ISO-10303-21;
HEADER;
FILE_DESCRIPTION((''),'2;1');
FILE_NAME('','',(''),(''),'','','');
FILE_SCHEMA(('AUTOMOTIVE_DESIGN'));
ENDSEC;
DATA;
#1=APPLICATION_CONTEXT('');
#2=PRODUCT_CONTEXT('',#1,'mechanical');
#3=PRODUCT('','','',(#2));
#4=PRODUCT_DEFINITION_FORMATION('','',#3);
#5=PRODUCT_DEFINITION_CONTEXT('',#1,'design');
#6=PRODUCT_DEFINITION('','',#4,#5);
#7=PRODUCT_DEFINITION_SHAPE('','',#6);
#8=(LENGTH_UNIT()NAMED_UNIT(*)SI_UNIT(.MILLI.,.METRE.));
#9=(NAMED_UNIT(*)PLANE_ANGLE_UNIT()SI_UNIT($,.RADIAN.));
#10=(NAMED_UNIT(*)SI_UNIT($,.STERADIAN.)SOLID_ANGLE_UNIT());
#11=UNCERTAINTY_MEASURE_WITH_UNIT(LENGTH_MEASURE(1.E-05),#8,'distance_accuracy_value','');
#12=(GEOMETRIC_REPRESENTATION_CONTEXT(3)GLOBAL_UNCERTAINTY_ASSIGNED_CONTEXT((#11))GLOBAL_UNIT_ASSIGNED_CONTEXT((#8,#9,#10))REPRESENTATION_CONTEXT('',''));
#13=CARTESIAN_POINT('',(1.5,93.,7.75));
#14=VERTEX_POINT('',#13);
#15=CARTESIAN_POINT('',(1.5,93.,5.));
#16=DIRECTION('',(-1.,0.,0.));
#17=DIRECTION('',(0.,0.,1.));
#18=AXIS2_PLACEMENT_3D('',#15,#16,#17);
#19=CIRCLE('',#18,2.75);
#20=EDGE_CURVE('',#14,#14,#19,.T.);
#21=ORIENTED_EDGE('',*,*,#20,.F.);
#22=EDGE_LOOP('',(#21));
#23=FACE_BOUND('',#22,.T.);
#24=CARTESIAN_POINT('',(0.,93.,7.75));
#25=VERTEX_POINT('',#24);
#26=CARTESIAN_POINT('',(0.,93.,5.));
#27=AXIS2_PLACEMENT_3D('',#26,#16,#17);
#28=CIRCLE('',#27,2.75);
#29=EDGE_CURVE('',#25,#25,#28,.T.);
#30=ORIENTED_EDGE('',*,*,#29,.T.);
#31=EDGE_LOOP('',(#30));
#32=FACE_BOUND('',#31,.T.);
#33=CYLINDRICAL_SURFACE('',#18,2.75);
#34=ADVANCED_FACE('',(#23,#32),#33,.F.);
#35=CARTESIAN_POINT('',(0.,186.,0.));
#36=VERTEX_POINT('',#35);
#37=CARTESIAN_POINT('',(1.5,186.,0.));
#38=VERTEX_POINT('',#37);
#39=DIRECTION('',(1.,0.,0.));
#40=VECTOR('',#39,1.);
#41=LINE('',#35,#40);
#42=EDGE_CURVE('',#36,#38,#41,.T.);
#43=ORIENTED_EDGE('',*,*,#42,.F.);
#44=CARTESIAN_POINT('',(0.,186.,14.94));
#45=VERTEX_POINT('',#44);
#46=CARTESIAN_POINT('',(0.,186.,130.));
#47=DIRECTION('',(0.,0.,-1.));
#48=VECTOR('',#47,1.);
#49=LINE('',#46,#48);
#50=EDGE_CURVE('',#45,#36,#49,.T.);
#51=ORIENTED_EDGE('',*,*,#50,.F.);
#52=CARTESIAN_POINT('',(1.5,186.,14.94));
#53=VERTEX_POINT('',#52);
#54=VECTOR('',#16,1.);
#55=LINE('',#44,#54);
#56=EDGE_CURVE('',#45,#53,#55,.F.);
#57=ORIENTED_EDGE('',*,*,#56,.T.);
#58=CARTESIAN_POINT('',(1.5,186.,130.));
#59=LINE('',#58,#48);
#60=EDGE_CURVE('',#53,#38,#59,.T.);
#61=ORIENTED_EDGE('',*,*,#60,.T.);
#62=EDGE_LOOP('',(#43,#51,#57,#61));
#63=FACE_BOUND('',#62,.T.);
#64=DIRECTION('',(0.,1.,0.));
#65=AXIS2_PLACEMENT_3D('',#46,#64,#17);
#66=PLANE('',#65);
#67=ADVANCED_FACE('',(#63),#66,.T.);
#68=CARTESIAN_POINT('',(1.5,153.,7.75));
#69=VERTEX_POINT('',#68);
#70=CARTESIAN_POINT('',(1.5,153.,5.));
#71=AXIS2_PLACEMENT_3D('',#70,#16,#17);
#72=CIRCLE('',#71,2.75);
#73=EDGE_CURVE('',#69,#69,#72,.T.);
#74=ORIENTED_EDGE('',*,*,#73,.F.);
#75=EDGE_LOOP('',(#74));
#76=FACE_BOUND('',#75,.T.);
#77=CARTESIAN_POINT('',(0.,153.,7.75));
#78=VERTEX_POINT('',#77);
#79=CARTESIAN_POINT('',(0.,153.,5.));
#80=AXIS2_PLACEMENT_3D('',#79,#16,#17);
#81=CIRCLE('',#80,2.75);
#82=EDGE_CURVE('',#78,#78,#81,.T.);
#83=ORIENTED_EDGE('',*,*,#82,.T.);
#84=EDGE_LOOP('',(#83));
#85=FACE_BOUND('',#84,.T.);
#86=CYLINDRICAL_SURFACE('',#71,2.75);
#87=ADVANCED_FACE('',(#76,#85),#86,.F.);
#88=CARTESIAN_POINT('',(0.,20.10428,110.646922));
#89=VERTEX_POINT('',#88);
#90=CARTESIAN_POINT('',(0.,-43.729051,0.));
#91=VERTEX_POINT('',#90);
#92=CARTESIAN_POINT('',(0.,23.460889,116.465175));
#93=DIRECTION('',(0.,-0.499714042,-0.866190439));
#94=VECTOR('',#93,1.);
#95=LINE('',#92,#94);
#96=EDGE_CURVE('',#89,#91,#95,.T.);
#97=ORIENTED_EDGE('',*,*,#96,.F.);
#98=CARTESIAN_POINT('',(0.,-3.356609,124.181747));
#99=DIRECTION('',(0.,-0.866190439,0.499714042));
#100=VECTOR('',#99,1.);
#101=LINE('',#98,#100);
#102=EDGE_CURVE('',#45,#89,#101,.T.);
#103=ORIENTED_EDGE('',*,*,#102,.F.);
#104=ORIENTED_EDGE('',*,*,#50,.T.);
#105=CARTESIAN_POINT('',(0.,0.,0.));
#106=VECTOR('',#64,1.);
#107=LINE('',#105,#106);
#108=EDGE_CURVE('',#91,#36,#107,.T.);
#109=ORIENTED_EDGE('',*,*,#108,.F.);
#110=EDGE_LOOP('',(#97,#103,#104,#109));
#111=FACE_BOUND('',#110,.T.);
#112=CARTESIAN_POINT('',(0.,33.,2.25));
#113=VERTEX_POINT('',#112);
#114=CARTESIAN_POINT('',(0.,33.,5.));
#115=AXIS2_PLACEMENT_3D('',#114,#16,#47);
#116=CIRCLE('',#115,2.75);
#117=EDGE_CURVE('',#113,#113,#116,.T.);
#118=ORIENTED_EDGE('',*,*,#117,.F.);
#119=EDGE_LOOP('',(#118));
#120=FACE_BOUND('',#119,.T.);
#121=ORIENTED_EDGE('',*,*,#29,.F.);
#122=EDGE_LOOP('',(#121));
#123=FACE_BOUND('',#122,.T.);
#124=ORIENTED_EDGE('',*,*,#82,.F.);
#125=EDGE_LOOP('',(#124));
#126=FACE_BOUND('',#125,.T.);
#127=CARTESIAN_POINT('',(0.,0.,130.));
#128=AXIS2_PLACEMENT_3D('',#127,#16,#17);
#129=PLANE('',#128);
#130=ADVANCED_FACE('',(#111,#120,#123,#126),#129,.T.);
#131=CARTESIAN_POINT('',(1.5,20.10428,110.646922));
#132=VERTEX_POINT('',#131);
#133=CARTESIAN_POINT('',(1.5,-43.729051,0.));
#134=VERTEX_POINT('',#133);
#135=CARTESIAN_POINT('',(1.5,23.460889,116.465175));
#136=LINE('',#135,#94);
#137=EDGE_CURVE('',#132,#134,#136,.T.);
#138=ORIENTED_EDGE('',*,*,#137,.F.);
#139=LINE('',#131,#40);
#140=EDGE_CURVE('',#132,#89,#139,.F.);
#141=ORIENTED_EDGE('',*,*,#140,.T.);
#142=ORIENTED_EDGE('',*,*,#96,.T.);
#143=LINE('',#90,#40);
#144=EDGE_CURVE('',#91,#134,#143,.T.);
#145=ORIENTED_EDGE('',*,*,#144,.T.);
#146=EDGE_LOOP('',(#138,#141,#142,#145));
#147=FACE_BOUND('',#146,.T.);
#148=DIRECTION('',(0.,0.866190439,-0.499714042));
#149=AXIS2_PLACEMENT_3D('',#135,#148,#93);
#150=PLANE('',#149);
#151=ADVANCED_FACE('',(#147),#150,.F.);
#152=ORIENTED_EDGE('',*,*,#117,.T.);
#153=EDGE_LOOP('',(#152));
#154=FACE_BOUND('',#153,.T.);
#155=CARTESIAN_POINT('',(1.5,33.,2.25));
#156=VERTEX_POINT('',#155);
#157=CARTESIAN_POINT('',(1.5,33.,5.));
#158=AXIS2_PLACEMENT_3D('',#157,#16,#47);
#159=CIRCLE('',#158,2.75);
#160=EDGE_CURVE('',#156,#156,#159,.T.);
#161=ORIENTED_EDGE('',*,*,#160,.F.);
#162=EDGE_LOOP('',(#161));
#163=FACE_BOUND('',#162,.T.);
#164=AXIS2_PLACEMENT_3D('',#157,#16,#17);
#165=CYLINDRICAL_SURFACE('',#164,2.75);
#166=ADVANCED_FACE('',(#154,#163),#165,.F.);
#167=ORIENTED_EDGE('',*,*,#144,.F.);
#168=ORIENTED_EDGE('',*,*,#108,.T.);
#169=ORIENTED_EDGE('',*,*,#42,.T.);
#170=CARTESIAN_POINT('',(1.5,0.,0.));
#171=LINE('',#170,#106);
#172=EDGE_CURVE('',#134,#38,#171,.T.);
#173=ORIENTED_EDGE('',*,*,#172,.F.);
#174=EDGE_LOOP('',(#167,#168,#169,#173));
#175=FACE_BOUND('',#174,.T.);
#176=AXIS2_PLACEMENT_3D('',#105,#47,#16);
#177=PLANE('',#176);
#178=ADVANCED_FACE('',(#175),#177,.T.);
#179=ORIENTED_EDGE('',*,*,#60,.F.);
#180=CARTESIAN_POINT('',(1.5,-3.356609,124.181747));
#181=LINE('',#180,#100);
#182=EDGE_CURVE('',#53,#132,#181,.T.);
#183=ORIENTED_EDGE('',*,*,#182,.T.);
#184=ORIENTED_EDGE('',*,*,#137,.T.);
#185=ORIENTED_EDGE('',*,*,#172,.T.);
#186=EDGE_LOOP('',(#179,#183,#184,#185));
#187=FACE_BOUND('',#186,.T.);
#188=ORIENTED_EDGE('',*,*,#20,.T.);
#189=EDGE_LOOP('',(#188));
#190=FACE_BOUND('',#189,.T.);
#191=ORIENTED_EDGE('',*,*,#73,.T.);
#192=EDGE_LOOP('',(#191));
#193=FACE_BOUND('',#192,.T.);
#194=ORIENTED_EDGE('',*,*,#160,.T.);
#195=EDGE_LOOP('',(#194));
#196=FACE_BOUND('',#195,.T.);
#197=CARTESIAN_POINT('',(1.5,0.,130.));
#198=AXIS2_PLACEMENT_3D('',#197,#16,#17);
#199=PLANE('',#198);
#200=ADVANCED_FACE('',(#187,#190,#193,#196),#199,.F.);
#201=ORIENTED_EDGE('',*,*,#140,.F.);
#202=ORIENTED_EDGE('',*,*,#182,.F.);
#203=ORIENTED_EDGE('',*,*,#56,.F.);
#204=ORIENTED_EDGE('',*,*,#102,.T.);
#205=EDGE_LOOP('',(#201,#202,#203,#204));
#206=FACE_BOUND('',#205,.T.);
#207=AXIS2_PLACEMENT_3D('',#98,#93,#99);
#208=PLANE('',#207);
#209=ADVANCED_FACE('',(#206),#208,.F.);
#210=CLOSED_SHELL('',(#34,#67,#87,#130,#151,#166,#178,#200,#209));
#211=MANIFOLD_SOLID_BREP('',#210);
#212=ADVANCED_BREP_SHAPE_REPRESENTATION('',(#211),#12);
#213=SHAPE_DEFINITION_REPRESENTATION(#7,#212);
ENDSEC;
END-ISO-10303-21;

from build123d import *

# Parameters (mm, degrees)
SKETCH_1_W             = 1.5
SKETCH_1_H             = 186
SM_BASE_FLANGE_1_DEPTH = 130
SKETCH_6_R             = 2.75
CUT_EXTRUDE_1_DEPTH    = 227.932258615
CUT_EXTRUDE_2_DEPTH    = 10
CUT_EXTRUDE_4_DEPTH    = 10
EXTRUDE_1_DEPTH        = 1.5


# Sheet-metal steps are written as plain solids
with BuildPart() as part:
    # Sketch 1 → 基体-法兰1 (new body)
    with BuildSketch(Plane.XY):
        with Locations((0.75, 93)):
            Rectangle(SKETCH_1_W, SKETCH_1_H)
    extrude(amount=SM_BASE_FLANGE_1_DEPTH)

    # 草图6 → 切除-拉伸1 (cut, through all)
    with BuildSketch(Plane.ZY):
        with Locations((5, 153)):
            Circle(SKETCH_6_R)
        with Locations((5, 93)):
            Circle(SKETCH_6_R)
        with Locations(Location((5, 33, 0), (0, 0, 180))):
            Circle(SKETCH_6_R)
    extrude(amount=-CUT_EXTRUDE_1_DEPTH, mode=Mode.SUBTRACT)

    # 草图7 → 切除-拉伸2 (cut)
    with BuildSketch(Plane(origin=(1.5, 0, 0), x_dir=(0, 0, -1), z_dir=(1, 0, 0))):
        Polygon((-14.94, 186), (-130, 186), (-130, -13.441807708), align=None)
    extrude(amount=-CUT_EXTRUDE_2_DEPTH, mode=Mode.SUBTRACT)

    # 草图8 → 切除-拉伸4 (cut)
    with BuildSketch(Plane.ZY):
        Polygon((122.245284915, 0), (110.646921999, 20.104280083), (75.798721386, 0), align=None)
    extrude(amount=-CUT_EXTRUDE_4_DEPTH, mode=Mode.SUBTRACT)

    # 草图10 → 凸台-拉伸1 (add)
    with BuildSketch(Plane(origin=(1.5, 0, 0), x_dir=(0, 0, -1), z_dir=(1, 0, 0))):
        Polygon((-75.798721386, 0), (0, 0), (0, -43.729050508), align=None)
    extrude(amount=-EXTRUDE_1_DEPTH)


solid = part.part
